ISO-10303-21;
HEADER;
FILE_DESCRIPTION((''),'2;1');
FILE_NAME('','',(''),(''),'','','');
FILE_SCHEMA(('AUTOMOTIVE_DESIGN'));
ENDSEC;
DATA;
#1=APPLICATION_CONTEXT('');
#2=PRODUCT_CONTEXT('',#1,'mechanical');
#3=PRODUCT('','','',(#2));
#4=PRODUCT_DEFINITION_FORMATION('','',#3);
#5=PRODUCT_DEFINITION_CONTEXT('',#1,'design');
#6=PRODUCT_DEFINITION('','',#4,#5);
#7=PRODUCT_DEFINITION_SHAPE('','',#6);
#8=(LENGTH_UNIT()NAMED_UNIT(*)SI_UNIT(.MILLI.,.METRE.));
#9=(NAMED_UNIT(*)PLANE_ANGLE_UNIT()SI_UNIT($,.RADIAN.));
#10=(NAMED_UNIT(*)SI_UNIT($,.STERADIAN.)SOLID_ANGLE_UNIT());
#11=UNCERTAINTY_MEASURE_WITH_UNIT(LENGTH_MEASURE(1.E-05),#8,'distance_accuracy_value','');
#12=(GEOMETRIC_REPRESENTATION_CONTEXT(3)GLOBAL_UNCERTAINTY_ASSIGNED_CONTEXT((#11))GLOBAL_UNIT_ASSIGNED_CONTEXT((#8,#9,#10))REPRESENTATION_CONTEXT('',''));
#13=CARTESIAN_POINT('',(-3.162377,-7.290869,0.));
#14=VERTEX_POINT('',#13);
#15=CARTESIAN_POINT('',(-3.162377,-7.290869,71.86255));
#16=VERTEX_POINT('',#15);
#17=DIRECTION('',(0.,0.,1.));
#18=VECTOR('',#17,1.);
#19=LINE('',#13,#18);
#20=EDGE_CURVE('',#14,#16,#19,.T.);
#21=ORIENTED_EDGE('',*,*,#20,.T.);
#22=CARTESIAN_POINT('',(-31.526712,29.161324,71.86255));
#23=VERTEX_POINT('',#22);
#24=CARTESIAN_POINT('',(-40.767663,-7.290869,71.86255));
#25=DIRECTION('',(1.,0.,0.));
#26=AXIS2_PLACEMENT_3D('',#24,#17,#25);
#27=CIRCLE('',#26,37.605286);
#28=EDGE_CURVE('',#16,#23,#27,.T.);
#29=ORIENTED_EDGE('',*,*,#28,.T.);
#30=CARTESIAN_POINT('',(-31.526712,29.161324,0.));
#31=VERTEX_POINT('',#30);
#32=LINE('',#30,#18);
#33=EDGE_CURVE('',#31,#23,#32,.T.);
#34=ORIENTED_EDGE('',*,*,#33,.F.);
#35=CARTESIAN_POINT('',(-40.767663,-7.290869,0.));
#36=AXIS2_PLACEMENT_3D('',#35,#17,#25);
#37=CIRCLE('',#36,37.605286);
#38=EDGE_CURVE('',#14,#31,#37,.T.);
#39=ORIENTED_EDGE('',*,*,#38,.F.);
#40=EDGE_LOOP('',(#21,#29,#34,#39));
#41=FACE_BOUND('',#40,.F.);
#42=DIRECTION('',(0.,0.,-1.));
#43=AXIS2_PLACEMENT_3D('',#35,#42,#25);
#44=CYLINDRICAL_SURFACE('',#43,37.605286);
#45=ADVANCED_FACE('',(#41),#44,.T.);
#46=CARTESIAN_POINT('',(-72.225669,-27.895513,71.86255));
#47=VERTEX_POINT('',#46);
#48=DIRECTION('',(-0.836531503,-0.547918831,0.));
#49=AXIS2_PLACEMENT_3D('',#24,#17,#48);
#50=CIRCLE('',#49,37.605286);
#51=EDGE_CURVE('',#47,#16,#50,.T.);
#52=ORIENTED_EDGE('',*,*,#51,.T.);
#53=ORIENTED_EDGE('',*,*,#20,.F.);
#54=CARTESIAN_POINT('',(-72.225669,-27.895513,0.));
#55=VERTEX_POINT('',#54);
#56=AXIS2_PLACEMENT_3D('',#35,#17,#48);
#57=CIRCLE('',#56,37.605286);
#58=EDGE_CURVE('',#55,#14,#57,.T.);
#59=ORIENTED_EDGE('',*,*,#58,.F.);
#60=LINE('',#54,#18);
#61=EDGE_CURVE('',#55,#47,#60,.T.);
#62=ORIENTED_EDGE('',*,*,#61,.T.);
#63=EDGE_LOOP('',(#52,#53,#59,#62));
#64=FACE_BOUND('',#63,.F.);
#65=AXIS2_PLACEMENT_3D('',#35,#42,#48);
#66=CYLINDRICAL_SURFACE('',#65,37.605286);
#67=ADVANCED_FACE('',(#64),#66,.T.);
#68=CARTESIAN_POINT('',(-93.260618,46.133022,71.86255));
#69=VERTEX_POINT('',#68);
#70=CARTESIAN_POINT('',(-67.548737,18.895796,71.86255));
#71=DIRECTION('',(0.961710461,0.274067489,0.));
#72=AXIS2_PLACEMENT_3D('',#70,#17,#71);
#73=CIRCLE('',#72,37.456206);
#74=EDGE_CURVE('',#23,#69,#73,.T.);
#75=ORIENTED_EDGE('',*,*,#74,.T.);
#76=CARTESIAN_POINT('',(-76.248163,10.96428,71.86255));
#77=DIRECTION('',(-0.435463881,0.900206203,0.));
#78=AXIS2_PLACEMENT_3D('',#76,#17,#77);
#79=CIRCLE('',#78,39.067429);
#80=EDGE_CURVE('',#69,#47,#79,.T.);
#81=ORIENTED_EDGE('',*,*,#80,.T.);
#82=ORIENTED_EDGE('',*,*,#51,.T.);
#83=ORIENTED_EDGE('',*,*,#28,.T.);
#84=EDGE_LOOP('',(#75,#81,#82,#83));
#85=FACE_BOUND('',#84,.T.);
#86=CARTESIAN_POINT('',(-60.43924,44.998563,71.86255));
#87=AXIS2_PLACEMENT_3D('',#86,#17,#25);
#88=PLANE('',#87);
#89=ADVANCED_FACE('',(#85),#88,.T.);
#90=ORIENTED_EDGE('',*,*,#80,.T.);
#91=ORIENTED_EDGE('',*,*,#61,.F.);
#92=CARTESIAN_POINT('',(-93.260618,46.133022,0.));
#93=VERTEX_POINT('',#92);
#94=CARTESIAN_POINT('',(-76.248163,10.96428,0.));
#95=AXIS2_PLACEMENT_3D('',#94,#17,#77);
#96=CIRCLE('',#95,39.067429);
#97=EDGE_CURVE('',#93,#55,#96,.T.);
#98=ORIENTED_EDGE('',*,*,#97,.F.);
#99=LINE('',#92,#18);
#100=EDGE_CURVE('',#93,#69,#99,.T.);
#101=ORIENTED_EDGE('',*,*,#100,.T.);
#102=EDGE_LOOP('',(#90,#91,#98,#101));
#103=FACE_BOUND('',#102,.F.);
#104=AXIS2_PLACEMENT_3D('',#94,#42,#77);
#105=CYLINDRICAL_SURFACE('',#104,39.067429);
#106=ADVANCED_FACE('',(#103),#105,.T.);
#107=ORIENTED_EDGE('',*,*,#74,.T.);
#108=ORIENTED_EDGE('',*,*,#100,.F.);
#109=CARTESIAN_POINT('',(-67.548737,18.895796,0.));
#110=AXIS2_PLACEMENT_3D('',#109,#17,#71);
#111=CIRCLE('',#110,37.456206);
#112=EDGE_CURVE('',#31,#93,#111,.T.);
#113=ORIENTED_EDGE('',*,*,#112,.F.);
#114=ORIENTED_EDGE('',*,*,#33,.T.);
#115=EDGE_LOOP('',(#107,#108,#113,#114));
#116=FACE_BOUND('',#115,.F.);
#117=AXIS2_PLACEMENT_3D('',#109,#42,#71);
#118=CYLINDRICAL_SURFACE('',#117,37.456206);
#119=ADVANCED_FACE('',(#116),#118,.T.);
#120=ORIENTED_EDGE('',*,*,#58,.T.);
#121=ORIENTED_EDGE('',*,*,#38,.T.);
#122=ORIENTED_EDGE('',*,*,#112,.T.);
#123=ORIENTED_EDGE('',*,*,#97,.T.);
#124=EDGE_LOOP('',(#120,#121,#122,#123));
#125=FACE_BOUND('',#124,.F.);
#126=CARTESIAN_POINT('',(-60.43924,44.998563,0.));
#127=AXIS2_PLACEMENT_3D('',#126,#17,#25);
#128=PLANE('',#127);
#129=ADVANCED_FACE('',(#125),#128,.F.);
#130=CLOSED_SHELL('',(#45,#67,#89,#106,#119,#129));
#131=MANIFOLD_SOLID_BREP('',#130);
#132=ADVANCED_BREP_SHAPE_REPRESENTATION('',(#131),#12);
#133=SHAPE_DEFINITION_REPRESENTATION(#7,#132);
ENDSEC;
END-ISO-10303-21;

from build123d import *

# Parameters (mm, degrees)
F1_DEPTH = 71.86255


# Not quite as in the source:
# - a feature names something its author has since deleted; it is built from what else it names


with BuildPart() as f1:
    # F0 (on Top) → F1 (new body)
    with BuildSketch(Plane.XY):
        with BuildLine():
            ThreePointArc((-42.2918507094, 30.2835155285), (-36.8686969087, 30.111745716), (-31.5267122489, 29.1613237519))
            ThreePointArc((-31.5267122489, 29.1613237519), (-57.6197689064, 55.0120374135), (-93.2606175848, 46.1330223766))
            ThreePointArc((-93.2606175848, 46.1330223766), (-64.6475038211, 48.2696246863), (-42.2918507094, 30.2835155285))
        make_face()
        with BuildLine():
            ThreePointArc((-77.0032953654, -17.3475301034), (-103.8339232373, 9.6031863752), (-93.2606175848, 46.1330223766))
            ThreePointArc((-93.2606175848, 46.1330223766), (-113.8279554448, 0.2861142751), (-72.2256688216, -27.895513017))
            ThreePointArc((-72.2256688216, -27.895513017), (-75.022912939, -22.8065171242), (-77.0032953654, -17.3475301034))
        make_face()
        with BuildLine():
            ThreePointArc((-31.5267122489, 29.1613237519), (-30.4528093217, 24.0784093765), (-30.0925314228, 18.8957955688))
            ThreePointArc((-30.0925314228, 18.8957955688), (-33.4160404477, 3.4709337592), (-42.7967740776, -9.2166156752))
            ThreePointArc((-42.7967740776, -9.2166156752), (-55.3125885207, -22.0200448939), (-72.2256688216, -27.895513017))
            ThreePointArc((-72.2256688216, -27.895513017), (-30.016611499, -43.3265790466), (-3.1623770139, -7.2908688538))
            ThreePointArc((-3.1623770139, -7.2908688538), (-11.0888310752, 15.802949903), (-31.5267122489, 29.1613237519))
        make_face()
        with BuildLine():
            ThreePointArc((-42.2918507094, 30.2835155285), (-64.6475038211, 48.2696246863), (-93.2606175848, 46.1330223766))
            ThreePointArc((-93.2606175848, 46.1330223766), (-103.8339232373, 9.6031863752), (-77.0032953654, -17.3475301034))
            ThreePointArc((-77.0032953654, -17.3475301034), (-71.1589466664, 14.8569836183), (-42.2918507094, 30.2835155285))
        make_face()
        with BuildLine():
            ThreePointArc((-72.2256688216, -27.895513017), (-55.3125885207, -22.0200448939), (-42.7967740776, -9.2166156752))
            ThreePointArc((-42.7967740776, -9.2166156752), (-58.8867170827, -17.5450708199), (-77.0032953654, -17.3475301034))
            ThreePointArc((-77.0032953654, -17.3475301034), (-75.022912939, -22.8065171242), (-72.2256688216, -27.895513017))
        make_face()
        with BuildLine():
            ThreePointArc((-42.7967740776, -9.2166156752), (-33.4160404477, 3.4709337592), (-30.0925314228, 18.8957955688))
            ThreePointArc((-30.0925314228, 18.8957955688), (-30.4528093217, 24.0784093765), (-31.5267122489, 29.1613237519))
            ThreePointArc((-31.5267122489, 29.1613237519), (-36.8686969087, 30.111745716), (-42.2918507094, 30.2835155285))
            ThreePointArc((-42.2918507094, 30.2835155285), (-38.480122311, 20.9562316448), (-37.1807342965, 10.9642804431))
            ThreePointArc((-37.1807342965, 10.9642804431), (-38.6109225506, 0.4904025681), (-42.7967740776, -9.2166156752))
        make_face()
        with BuildLine():
            ThreePointArc((-77.0032953654, -17.3475301034), (-58.8867170827, -17.5450708199), (-42.7967740776, -9.2166156752))
            ThreePointArc((-42.7967740776, -9.2166156752), (-38.6109225506, 0.4904025681), (-37.1807342965, 10.9642804431))
            ThreePointArc((-37.1807342965, 10.9642804431), (-38.480122311, 20.9562316448), (-42.2918507094, 30.2835155285))
            ThreePointArc((-42.2918507094, 30.2835155285), (-71.1589466664, 14.8569836183), (-77.0032953654, -17.3475301034))
        make_face()
    extrude(amount=F1_DEPTH)


solid = f1.part
